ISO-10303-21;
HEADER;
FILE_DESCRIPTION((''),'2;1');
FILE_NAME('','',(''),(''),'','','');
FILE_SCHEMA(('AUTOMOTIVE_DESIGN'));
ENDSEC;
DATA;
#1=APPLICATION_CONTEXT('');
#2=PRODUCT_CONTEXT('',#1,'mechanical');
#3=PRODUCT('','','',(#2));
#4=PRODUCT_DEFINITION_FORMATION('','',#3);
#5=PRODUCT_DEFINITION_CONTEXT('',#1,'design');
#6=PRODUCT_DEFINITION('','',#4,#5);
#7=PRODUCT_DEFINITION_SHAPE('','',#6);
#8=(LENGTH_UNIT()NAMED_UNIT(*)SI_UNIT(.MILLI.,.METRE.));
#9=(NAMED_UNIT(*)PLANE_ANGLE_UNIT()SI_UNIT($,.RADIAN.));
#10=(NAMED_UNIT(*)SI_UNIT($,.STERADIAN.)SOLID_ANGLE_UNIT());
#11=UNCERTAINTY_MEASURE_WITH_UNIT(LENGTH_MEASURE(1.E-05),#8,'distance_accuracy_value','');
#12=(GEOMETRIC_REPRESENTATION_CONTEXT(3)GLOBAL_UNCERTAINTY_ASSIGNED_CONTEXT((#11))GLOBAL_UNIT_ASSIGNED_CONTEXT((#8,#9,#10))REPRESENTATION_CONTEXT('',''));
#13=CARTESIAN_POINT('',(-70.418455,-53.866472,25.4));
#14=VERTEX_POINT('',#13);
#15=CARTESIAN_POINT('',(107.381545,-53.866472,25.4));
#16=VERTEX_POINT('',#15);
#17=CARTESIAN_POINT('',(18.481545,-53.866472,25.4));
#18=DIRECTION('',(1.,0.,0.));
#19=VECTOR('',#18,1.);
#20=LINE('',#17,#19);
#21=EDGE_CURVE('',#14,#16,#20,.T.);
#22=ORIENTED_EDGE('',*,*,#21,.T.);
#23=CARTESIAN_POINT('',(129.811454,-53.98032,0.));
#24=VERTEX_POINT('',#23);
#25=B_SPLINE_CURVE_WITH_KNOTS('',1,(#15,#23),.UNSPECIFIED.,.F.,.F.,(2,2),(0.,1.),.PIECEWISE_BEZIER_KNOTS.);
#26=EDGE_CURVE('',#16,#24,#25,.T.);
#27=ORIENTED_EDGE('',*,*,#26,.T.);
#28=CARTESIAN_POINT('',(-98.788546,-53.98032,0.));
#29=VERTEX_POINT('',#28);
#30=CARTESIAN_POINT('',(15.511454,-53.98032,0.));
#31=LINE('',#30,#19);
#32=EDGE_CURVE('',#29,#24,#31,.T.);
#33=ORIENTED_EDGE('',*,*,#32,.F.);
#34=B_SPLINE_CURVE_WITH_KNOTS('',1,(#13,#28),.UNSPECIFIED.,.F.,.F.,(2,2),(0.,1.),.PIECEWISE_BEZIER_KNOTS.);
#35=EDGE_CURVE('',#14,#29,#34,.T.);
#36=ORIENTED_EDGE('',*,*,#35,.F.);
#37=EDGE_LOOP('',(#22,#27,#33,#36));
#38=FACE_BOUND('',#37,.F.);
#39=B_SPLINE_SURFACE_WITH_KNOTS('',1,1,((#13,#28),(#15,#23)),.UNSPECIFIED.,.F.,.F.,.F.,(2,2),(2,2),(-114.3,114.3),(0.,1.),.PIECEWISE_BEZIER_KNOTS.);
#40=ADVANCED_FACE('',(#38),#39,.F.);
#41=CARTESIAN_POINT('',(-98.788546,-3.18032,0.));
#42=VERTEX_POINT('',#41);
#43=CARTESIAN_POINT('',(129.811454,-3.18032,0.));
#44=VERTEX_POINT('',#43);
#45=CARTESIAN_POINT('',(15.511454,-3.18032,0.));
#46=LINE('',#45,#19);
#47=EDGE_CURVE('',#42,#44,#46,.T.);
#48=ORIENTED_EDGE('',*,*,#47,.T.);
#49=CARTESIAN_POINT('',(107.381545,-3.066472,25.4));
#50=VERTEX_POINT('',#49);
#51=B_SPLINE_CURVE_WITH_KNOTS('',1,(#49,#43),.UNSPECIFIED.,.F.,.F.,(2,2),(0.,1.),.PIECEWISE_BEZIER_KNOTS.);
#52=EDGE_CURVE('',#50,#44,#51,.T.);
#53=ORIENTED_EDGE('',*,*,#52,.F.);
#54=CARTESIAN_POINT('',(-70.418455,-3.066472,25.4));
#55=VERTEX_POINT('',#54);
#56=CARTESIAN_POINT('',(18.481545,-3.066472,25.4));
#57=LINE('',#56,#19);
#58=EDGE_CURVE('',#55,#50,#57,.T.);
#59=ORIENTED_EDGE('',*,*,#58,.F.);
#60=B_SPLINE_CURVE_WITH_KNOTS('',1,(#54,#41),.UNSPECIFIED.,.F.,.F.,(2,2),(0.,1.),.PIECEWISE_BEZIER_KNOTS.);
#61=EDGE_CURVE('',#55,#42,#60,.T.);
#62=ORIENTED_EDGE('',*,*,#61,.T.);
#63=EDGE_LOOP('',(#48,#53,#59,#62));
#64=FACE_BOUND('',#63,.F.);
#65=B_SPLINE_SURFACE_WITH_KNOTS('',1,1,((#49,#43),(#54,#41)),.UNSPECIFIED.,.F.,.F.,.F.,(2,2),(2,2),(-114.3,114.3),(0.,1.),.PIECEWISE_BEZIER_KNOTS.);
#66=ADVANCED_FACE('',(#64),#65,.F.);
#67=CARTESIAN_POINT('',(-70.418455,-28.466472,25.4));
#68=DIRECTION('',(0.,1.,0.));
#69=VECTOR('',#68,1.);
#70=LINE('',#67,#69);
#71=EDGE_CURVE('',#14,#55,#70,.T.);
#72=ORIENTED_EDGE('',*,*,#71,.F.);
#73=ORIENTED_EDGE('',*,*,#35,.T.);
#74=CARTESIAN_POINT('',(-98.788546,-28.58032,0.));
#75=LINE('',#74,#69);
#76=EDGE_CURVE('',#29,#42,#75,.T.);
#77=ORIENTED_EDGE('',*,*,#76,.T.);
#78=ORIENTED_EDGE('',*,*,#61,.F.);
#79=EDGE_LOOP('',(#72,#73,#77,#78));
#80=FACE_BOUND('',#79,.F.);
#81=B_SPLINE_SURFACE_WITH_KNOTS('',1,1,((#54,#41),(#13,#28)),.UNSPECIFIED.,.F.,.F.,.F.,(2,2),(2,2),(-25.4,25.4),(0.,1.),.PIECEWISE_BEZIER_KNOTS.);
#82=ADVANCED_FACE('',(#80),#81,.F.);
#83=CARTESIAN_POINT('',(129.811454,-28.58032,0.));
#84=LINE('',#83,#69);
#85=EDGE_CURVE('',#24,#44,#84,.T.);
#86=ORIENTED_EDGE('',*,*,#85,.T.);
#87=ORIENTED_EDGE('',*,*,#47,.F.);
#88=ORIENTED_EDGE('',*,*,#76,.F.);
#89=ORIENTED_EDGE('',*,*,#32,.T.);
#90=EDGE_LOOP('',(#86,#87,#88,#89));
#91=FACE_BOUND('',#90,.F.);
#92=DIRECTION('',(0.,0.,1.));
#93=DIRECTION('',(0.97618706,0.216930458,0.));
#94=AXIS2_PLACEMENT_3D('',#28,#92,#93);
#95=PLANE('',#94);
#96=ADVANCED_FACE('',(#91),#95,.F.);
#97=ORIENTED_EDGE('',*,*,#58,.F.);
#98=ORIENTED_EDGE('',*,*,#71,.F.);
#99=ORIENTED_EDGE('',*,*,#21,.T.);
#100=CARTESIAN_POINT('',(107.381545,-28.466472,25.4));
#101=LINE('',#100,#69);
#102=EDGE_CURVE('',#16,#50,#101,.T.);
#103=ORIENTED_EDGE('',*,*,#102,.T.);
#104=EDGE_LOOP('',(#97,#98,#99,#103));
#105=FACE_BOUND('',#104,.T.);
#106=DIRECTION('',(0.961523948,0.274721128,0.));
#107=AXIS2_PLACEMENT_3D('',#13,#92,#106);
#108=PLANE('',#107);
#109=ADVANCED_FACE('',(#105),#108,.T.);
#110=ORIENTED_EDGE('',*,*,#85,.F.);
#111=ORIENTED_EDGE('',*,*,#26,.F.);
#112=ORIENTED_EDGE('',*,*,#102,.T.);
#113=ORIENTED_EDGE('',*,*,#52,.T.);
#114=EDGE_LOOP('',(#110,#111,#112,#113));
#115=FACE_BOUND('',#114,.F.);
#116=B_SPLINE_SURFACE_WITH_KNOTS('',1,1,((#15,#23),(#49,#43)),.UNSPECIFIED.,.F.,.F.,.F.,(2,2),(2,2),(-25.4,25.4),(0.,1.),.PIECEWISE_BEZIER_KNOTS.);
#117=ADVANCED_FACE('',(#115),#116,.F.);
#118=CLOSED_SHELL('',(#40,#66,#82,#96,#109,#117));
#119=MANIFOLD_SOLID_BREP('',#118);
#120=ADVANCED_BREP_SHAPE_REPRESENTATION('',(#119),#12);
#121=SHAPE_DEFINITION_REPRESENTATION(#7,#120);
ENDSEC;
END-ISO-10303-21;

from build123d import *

# Parameters (mm, degrees)
F2_W = 177.8
F2_H = 50.8
F0_W = 228.6
F0_H = 50.8


# Not quite as in the source:
# - the program builds the solid bodies; features that only make, move or delete a surface that nothing else refers to are left out


with BuildPart() as f3:
    # F2 (on offset) → F3 section 0
    with BuildSketch(Plane.XY.offset(25.4)):
        with Locations((18.4815449747, -28.4664724022)):
            Rectangle(F2_W, F2_H)
    # F0 (on Top) → F3 section 1
    with BuildSketch(Plane.XY):
        with Locations((15.5114542365, -28.5803195664)):
            Rectangle(F0_W, F0_H)
    loft()


solid = f3.part
